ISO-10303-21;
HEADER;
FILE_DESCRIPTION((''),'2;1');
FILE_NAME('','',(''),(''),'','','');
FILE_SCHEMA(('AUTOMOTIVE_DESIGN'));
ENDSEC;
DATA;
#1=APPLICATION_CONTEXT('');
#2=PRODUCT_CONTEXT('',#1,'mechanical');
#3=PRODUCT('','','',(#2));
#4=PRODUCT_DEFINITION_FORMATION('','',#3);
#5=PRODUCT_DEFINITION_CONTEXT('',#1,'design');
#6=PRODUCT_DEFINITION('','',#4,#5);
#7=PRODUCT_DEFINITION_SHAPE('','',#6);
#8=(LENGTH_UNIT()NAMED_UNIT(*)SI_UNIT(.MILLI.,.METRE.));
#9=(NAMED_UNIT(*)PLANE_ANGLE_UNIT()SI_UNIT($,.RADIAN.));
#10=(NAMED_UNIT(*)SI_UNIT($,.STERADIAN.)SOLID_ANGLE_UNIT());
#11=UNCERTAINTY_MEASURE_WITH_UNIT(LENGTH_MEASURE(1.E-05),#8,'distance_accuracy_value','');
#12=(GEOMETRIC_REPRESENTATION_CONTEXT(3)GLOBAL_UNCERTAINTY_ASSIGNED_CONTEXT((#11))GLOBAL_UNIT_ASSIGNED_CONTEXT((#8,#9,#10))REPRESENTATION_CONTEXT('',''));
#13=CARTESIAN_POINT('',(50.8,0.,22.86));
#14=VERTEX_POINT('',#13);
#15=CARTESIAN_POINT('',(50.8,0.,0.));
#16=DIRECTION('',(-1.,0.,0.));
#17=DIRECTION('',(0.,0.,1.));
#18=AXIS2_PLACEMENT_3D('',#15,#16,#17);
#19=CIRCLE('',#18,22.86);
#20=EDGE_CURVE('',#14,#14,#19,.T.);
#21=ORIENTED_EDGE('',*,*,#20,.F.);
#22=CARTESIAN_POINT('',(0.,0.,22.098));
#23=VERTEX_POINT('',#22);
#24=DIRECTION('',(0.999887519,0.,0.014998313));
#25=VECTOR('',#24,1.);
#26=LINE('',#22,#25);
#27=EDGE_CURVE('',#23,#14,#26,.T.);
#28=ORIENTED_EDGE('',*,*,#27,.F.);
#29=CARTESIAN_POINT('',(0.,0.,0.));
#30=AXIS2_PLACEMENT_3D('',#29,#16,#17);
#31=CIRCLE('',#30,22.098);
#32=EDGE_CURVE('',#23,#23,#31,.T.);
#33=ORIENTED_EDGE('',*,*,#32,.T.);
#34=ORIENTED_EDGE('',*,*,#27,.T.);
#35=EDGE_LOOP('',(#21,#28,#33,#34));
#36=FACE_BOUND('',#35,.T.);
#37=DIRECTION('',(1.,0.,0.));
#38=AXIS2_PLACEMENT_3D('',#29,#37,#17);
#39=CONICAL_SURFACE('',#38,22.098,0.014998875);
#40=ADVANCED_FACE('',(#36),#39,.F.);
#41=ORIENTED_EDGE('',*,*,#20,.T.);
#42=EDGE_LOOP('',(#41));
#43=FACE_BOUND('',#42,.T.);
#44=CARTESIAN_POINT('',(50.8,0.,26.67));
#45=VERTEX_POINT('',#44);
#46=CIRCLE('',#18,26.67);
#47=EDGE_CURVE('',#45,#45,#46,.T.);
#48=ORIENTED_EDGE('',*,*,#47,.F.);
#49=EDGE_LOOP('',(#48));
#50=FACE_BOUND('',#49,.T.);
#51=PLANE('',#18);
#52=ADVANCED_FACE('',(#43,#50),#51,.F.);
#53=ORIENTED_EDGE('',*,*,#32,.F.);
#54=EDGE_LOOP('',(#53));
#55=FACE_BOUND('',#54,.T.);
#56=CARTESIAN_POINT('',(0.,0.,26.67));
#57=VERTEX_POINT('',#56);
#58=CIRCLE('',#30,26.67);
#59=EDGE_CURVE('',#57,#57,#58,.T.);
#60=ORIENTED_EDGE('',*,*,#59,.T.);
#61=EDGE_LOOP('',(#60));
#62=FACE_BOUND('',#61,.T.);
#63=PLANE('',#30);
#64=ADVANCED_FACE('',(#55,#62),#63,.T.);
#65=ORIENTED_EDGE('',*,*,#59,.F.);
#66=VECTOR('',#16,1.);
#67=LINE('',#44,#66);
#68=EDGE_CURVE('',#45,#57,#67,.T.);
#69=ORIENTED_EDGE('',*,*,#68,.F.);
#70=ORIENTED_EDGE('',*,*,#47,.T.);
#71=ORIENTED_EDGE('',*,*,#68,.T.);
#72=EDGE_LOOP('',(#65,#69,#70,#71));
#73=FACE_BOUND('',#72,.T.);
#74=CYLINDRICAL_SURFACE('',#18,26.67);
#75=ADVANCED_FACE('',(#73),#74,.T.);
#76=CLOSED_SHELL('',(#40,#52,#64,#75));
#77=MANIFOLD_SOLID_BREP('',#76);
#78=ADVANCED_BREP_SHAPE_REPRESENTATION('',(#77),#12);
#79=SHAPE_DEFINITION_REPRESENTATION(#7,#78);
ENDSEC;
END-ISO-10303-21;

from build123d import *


# Not quite as in the source:
# - a feature of the source that left no trace in its solid (it failed there, or was rolled back) is left out


with BuildPart() as f1:
    # F0 (on Front) → F1 (revolve)
    with BuildSketch(Plane.XZ):
        Polygon((50.8, 26.67), (0, 26.67), (0, 22.098), (50.8, 22.86), align=None)
    revolve(axis=Axis((-51.9470935156, 0, 0), (-1, 0, 0)))


solid = f1.part
